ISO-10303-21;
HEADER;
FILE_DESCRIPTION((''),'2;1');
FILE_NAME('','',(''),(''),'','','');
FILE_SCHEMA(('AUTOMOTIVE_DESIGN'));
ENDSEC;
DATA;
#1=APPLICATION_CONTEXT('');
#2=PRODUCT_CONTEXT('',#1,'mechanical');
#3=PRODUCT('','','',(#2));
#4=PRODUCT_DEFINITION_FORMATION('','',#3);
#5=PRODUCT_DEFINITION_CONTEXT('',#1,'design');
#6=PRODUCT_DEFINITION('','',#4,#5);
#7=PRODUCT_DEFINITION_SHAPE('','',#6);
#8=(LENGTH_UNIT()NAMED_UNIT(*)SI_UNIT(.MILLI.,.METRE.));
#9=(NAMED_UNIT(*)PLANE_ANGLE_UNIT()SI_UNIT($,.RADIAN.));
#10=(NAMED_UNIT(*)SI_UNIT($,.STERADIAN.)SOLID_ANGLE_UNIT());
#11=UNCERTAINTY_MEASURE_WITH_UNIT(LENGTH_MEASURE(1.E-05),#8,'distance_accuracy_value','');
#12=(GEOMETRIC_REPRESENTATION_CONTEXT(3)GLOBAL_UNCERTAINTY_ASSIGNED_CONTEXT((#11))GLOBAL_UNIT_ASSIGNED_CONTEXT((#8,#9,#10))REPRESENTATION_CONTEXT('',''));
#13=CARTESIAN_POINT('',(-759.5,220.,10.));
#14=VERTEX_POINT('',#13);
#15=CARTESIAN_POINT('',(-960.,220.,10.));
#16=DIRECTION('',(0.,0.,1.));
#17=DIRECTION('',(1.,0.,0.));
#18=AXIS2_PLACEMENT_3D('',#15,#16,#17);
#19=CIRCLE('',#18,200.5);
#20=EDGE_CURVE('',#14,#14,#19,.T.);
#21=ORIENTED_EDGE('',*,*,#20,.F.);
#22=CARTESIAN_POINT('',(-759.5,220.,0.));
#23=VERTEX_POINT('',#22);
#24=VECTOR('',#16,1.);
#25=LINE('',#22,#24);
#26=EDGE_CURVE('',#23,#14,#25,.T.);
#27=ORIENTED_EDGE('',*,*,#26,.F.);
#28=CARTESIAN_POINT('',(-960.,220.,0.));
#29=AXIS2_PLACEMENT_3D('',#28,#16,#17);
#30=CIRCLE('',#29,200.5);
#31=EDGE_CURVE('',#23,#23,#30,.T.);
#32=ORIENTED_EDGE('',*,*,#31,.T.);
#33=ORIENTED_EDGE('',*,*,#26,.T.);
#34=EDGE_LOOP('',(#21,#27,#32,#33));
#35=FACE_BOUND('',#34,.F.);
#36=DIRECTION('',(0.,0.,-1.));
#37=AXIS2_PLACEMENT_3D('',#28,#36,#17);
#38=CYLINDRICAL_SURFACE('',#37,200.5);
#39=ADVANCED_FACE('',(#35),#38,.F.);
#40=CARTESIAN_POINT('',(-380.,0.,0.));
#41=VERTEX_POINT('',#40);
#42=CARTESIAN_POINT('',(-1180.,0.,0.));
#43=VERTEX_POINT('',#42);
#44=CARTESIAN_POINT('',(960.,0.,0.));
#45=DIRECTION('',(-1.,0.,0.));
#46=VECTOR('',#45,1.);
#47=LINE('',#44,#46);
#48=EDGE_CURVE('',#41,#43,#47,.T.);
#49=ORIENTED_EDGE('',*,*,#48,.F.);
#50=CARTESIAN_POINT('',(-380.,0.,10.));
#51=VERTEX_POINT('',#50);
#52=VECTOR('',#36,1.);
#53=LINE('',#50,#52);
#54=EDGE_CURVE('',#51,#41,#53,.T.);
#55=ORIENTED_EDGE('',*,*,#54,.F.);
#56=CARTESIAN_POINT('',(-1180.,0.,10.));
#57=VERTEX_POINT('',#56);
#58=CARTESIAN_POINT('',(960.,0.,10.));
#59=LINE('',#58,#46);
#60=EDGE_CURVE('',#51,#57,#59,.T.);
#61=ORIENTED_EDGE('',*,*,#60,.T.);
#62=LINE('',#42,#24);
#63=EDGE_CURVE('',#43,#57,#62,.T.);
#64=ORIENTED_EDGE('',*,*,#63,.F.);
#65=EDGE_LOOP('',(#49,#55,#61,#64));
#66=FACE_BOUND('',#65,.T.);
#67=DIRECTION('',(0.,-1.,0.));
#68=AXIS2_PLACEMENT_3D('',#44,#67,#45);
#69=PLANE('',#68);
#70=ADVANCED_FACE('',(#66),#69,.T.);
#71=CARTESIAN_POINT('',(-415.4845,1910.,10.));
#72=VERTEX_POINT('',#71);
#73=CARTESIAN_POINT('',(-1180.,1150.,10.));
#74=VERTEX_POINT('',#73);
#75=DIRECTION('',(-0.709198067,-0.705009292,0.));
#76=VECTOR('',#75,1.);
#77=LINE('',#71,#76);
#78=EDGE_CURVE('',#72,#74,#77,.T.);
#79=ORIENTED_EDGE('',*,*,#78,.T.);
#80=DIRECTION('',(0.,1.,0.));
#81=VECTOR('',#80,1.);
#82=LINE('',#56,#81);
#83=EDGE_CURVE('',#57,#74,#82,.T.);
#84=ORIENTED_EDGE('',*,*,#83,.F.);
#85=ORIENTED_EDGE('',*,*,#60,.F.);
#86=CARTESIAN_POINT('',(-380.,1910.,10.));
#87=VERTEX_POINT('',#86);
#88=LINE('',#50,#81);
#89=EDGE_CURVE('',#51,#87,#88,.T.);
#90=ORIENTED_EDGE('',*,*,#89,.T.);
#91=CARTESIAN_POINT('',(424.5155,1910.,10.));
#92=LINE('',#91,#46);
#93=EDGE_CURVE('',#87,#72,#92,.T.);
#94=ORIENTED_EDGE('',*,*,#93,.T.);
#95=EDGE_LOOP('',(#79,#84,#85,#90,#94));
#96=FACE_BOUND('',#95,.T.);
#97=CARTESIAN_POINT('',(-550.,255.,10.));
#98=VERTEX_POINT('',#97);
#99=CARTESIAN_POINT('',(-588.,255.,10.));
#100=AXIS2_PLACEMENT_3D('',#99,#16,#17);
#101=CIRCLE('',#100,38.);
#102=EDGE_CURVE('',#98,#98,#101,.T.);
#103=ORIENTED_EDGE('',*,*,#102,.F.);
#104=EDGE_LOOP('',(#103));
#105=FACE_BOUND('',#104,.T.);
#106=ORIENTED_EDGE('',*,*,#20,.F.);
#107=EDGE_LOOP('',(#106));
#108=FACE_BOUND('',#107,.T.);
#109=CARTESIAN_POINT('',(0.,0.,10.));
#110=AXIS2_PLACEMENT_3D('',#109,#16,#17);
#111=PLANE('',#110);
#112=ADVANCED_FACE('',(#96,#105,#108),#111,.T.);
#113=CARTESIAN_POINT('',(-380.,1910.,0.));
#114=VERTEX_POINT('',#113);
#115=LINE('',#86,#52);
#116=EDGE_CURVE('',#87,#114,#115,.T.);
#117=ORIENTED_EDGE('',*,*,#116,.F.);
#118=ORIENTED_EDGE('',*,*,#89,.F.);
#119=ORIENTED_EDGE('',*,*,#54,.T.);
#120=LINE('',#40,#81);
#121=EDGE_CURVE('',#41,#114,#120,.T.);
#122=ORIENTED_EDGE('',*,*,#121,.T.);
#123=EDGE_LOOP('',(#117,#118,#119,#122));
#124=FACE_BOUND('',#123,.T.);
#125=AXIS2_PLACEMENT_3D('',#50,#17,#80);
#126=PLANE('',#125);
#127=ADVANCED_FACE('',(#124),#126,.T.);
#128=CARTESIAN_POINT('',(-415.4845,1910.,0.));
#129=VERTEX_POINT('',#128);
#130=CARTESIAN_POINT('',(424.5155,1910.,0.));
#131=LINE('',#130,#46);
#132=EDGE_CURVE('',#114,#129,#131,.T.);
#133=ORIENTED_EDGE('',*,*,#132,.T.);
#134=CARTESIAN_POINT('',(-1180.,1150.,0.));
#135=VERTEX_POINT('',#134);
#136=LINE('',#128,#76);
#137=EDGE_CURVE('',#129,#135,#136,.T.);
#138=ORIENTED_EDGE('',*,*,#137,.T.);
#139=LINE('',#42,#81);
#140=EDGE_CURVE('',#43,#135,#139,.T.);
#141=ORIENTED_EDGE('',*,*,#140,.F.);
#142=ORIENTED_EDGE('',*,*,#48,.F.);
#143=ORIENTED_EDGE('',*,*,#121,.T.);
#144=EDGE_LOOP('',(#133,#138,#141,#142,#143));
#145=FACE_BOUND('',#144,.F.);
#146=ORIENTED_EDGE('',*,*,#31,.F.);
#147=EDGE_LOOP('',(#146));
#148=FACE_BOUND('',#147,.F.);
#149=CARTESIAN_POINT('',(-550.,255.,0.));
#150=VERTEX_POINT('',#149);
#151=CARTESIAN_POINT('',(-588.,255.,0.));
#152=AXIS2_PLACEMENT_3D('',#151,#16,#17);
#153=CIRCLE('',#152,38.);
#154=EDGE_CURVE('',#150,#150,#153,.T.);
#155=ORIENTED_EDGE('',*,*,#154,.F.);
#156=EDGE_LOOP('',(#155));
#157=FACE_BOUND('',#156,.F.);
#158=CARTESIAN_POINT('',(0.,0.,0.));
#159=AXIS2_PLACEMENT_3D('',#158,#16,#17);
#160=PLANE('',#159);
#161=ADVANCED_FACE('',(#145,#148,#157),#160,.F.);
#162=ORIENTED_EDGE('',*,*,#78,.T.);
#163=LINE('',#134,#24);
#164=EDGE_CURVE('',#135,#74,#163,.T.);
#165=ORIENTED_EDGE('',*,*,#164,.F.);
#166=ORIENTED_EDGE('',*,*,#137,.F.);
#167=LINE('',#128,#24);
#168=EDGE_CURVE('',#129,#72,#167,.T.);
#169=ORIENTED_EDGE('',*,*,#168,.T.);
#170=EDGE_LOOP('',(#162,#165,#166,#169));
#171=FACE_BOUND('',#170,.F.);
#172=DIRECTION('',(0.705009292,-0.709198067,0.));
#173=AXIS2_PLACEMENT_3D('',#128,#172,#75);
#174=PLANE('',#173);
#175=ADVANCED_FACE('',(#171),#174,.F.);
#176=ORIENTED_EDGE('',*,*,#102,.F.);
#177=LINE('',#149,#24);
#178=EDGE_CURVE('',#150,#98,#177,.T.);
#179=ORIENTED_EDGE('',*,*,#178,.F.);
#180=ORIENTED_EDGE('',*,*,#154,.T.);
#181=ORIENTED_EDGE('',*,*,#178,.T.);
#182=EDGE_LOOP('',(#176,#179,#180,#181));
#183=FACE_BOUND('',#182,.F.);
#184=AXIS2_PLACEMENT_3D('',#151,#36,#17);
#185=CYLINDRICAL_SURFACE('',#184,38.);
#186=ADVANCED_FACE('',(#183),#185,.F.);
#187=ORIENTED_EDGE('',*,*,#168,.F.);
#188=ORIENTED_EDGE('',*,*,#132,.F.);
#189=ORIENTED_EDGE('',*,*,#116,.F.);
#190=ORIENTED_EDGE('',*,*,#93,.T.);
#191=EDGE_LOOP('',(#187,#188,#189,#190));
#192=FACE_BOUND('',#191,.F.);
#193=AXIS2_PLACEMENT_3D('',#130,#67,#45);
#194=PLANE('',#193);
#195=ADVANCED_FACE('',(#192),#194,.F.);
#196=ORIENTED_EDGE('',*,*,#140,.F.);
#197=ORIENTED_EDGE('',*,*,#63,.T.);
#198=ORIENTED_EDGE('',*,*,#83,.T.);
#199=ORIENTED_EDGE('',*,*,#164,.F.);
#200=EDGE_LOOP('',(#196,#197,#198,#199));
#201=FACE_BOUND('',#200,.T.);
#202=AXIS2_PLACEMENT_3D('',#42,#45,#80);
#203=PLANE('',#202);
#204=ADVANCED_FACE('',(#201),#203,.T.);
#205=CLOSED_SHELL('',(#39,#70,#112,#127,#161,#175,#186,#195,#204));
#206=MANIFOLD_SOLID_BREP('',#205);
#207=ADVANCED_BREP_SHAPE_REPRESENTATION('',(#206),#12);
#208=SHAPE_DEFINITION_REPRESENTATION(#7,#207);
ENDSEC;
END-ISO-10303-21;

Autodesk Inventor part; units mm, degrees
ref_plane "YZ Plane" through (0, 0, 0) normal (1, 0, 0) x (0, 1, 0)
ref_plane "XZ Plane" through (0, 0, 0) normal (0, 1, 0) x (-1, 0, 0)
ref_plane "XY Plane" through (0, 0, 0) normal (0, 0, 1) x (1, 0, 0)
sketch "Sketch1" plane through (0, 0, 0) normal (0, 0, 1) x (1, 0, 0)
  line L0 (0, 0) -> (0, 1910) construction
  line L1 (424.5155, 1910) -> (-415.4845, 1910)
  line L2 (-415.4845, 1910) -> (-1180, 1150)
  line L3 (-1180, 0) -> (-1180, 1150)
  line L4 (960, 0) -> (960, 1342.8524)
  line L5 (424.5155, 1910) -> (960, 1342.8524)
  circle A0 centre (0, 950) radius 195 construction
  line L6 (960, 0) -> (-1180, 0)
  circle A1 centre (-960, 220) radius 200.5
  circle A2 centre (-588, 255) radius 38
  circle A3 centre (374.6358, 1277) radius 50
  circle A4 centre (0, 950) radius 155
  point P0 (0, 955)
  dimension "d1" = 840
  dimension "d3" = 1150
  dimension "d11" = 390
  dimension "d12" = 1180
  dimension "d13" = 950
  dimension "d14" = 76
  dimension "d15" = 1910
  dimension "d16" = 255
  dimension "d17" = 220
  dimension "d18" = 401
  dimension "d19" = 220
  dimension "d21" = 1277
  dimension "d22" = 1554.6358
  dimension "d23" = 100
  dimension "d33" = 2140
  dimension "d34" = 494
  dimension "d45" = 310
  dimension "d49" = 372
  dimension "d51" = 780
  dimension "d52" = 1078
extrude "Extrusion1" add sketch "Sketch1" along normal blind 10
sketch "Sketch3" plane through (0, 0, 10) normal (0, 0, 1) x (1, 0, 0)
  line L0 (-400, 950) -> (400, 950) construction
  circle A0 centre (0, 950) radius 155 projected
  circle A1 centre (155, 950) radius 2.5
  circle A2 centre (-155, 950) radius 2.5
  line L1 (132.7592, 870) -> (-132.7592, 870) construction
  circle A3 centre (132.7592, 870) radius 2.5
  circle A4 centre (-132.7592, 870) radius 2.5
  point P0 (0, 0)
  point P1 (-154.9798, 947.5001)
  point P2 (-154.9798, 952.4999)
  point P3 (154.9798, 947.5001)
  point P4 (154.9798, 952.4999)
  point P5 (134.0322, 872.1516)
  point P6 (131.4516, 867.8692)
  dimension "d47" = 5
  dimension "d48" = 80
extrude "Extrusion3" cut sketch "Sketch3" against normal through all contours A0 A1 | A0 A2 | A3 A0 | A4 A0 | A0 A4 picked at (155.7492, 949.3589) picked at (-155.8257, 950.101) picked at (133.5004, 869.6223)
sketch "Sketch4" plane through (0, 0, 10) normal (0, 0, 1) x (1, 0, 0)
  arc A0 (154.9798, 947.5001) -> (154.9798, 952.4999) centre (155, 950) ccw projected
  arc A1 (134.0322, 872.1516) -> (154.9798, 947.5001) centre (0, 950) ccw projected
  arc A2 (131.4516, 867.8692) -> (134.0322, 872.1516) centre (132.7592, 870) ccw projected
  arc A3 (-131.4516, 867.8692) -> (131.4516, 867.8692) centre (0, 950) ccw projected
  arc A4 (-134.0322, 872.1516) -> (-131.4516, 867.8692) centre (-132.7592, 870) ccw projected
  arc A5 (-154.9798, 947.5001) -> (-134.0322, 872.1516) centre (0, 950) ccw projected
  arc A6 (-154.9798, 952.4999) -> (-154.9798, 947.5001) centre (-155, 950) ccw projected
  arc A7 (154.9798, 952.4999) -> (-154.9798, 952.4999) centre (0, 950) ccw projected
  line L0 (960, 1342.8524) -> (424.5155, 1910) projected
  line L1 (424.5155, 1910) -> (-415.4845, 1910) projected
  line L2 (-415.4845, 1910) -> (-1180, 1150) projected
  line L3 (-1180, 1150) -> (-1180, 0) projected
  line L4 (-1180, 0) -> (960, 0) projected
  line L5 (960, 0) -> (960, 1342.8524) projected
  circle A8 centre (374.6358, 1277) radius 50 projected
  circle A9 centre (-588, 255) radius 38 projected
  circle A10 centre (-960, 220) radius 200.5 projected
  line L6 (-380, 0) -> (-380, 1910)
  point P0 (0, 0)
  dimension "d53" = 1340
extrude "Extrusion4" cut sketch "Sketch4" against normal through all contours L5 L4 L6 L1 L0
equation "\"d17\" = d19"
properties part number "ДМФ 014 Стенка Нос ЛЕВ"
